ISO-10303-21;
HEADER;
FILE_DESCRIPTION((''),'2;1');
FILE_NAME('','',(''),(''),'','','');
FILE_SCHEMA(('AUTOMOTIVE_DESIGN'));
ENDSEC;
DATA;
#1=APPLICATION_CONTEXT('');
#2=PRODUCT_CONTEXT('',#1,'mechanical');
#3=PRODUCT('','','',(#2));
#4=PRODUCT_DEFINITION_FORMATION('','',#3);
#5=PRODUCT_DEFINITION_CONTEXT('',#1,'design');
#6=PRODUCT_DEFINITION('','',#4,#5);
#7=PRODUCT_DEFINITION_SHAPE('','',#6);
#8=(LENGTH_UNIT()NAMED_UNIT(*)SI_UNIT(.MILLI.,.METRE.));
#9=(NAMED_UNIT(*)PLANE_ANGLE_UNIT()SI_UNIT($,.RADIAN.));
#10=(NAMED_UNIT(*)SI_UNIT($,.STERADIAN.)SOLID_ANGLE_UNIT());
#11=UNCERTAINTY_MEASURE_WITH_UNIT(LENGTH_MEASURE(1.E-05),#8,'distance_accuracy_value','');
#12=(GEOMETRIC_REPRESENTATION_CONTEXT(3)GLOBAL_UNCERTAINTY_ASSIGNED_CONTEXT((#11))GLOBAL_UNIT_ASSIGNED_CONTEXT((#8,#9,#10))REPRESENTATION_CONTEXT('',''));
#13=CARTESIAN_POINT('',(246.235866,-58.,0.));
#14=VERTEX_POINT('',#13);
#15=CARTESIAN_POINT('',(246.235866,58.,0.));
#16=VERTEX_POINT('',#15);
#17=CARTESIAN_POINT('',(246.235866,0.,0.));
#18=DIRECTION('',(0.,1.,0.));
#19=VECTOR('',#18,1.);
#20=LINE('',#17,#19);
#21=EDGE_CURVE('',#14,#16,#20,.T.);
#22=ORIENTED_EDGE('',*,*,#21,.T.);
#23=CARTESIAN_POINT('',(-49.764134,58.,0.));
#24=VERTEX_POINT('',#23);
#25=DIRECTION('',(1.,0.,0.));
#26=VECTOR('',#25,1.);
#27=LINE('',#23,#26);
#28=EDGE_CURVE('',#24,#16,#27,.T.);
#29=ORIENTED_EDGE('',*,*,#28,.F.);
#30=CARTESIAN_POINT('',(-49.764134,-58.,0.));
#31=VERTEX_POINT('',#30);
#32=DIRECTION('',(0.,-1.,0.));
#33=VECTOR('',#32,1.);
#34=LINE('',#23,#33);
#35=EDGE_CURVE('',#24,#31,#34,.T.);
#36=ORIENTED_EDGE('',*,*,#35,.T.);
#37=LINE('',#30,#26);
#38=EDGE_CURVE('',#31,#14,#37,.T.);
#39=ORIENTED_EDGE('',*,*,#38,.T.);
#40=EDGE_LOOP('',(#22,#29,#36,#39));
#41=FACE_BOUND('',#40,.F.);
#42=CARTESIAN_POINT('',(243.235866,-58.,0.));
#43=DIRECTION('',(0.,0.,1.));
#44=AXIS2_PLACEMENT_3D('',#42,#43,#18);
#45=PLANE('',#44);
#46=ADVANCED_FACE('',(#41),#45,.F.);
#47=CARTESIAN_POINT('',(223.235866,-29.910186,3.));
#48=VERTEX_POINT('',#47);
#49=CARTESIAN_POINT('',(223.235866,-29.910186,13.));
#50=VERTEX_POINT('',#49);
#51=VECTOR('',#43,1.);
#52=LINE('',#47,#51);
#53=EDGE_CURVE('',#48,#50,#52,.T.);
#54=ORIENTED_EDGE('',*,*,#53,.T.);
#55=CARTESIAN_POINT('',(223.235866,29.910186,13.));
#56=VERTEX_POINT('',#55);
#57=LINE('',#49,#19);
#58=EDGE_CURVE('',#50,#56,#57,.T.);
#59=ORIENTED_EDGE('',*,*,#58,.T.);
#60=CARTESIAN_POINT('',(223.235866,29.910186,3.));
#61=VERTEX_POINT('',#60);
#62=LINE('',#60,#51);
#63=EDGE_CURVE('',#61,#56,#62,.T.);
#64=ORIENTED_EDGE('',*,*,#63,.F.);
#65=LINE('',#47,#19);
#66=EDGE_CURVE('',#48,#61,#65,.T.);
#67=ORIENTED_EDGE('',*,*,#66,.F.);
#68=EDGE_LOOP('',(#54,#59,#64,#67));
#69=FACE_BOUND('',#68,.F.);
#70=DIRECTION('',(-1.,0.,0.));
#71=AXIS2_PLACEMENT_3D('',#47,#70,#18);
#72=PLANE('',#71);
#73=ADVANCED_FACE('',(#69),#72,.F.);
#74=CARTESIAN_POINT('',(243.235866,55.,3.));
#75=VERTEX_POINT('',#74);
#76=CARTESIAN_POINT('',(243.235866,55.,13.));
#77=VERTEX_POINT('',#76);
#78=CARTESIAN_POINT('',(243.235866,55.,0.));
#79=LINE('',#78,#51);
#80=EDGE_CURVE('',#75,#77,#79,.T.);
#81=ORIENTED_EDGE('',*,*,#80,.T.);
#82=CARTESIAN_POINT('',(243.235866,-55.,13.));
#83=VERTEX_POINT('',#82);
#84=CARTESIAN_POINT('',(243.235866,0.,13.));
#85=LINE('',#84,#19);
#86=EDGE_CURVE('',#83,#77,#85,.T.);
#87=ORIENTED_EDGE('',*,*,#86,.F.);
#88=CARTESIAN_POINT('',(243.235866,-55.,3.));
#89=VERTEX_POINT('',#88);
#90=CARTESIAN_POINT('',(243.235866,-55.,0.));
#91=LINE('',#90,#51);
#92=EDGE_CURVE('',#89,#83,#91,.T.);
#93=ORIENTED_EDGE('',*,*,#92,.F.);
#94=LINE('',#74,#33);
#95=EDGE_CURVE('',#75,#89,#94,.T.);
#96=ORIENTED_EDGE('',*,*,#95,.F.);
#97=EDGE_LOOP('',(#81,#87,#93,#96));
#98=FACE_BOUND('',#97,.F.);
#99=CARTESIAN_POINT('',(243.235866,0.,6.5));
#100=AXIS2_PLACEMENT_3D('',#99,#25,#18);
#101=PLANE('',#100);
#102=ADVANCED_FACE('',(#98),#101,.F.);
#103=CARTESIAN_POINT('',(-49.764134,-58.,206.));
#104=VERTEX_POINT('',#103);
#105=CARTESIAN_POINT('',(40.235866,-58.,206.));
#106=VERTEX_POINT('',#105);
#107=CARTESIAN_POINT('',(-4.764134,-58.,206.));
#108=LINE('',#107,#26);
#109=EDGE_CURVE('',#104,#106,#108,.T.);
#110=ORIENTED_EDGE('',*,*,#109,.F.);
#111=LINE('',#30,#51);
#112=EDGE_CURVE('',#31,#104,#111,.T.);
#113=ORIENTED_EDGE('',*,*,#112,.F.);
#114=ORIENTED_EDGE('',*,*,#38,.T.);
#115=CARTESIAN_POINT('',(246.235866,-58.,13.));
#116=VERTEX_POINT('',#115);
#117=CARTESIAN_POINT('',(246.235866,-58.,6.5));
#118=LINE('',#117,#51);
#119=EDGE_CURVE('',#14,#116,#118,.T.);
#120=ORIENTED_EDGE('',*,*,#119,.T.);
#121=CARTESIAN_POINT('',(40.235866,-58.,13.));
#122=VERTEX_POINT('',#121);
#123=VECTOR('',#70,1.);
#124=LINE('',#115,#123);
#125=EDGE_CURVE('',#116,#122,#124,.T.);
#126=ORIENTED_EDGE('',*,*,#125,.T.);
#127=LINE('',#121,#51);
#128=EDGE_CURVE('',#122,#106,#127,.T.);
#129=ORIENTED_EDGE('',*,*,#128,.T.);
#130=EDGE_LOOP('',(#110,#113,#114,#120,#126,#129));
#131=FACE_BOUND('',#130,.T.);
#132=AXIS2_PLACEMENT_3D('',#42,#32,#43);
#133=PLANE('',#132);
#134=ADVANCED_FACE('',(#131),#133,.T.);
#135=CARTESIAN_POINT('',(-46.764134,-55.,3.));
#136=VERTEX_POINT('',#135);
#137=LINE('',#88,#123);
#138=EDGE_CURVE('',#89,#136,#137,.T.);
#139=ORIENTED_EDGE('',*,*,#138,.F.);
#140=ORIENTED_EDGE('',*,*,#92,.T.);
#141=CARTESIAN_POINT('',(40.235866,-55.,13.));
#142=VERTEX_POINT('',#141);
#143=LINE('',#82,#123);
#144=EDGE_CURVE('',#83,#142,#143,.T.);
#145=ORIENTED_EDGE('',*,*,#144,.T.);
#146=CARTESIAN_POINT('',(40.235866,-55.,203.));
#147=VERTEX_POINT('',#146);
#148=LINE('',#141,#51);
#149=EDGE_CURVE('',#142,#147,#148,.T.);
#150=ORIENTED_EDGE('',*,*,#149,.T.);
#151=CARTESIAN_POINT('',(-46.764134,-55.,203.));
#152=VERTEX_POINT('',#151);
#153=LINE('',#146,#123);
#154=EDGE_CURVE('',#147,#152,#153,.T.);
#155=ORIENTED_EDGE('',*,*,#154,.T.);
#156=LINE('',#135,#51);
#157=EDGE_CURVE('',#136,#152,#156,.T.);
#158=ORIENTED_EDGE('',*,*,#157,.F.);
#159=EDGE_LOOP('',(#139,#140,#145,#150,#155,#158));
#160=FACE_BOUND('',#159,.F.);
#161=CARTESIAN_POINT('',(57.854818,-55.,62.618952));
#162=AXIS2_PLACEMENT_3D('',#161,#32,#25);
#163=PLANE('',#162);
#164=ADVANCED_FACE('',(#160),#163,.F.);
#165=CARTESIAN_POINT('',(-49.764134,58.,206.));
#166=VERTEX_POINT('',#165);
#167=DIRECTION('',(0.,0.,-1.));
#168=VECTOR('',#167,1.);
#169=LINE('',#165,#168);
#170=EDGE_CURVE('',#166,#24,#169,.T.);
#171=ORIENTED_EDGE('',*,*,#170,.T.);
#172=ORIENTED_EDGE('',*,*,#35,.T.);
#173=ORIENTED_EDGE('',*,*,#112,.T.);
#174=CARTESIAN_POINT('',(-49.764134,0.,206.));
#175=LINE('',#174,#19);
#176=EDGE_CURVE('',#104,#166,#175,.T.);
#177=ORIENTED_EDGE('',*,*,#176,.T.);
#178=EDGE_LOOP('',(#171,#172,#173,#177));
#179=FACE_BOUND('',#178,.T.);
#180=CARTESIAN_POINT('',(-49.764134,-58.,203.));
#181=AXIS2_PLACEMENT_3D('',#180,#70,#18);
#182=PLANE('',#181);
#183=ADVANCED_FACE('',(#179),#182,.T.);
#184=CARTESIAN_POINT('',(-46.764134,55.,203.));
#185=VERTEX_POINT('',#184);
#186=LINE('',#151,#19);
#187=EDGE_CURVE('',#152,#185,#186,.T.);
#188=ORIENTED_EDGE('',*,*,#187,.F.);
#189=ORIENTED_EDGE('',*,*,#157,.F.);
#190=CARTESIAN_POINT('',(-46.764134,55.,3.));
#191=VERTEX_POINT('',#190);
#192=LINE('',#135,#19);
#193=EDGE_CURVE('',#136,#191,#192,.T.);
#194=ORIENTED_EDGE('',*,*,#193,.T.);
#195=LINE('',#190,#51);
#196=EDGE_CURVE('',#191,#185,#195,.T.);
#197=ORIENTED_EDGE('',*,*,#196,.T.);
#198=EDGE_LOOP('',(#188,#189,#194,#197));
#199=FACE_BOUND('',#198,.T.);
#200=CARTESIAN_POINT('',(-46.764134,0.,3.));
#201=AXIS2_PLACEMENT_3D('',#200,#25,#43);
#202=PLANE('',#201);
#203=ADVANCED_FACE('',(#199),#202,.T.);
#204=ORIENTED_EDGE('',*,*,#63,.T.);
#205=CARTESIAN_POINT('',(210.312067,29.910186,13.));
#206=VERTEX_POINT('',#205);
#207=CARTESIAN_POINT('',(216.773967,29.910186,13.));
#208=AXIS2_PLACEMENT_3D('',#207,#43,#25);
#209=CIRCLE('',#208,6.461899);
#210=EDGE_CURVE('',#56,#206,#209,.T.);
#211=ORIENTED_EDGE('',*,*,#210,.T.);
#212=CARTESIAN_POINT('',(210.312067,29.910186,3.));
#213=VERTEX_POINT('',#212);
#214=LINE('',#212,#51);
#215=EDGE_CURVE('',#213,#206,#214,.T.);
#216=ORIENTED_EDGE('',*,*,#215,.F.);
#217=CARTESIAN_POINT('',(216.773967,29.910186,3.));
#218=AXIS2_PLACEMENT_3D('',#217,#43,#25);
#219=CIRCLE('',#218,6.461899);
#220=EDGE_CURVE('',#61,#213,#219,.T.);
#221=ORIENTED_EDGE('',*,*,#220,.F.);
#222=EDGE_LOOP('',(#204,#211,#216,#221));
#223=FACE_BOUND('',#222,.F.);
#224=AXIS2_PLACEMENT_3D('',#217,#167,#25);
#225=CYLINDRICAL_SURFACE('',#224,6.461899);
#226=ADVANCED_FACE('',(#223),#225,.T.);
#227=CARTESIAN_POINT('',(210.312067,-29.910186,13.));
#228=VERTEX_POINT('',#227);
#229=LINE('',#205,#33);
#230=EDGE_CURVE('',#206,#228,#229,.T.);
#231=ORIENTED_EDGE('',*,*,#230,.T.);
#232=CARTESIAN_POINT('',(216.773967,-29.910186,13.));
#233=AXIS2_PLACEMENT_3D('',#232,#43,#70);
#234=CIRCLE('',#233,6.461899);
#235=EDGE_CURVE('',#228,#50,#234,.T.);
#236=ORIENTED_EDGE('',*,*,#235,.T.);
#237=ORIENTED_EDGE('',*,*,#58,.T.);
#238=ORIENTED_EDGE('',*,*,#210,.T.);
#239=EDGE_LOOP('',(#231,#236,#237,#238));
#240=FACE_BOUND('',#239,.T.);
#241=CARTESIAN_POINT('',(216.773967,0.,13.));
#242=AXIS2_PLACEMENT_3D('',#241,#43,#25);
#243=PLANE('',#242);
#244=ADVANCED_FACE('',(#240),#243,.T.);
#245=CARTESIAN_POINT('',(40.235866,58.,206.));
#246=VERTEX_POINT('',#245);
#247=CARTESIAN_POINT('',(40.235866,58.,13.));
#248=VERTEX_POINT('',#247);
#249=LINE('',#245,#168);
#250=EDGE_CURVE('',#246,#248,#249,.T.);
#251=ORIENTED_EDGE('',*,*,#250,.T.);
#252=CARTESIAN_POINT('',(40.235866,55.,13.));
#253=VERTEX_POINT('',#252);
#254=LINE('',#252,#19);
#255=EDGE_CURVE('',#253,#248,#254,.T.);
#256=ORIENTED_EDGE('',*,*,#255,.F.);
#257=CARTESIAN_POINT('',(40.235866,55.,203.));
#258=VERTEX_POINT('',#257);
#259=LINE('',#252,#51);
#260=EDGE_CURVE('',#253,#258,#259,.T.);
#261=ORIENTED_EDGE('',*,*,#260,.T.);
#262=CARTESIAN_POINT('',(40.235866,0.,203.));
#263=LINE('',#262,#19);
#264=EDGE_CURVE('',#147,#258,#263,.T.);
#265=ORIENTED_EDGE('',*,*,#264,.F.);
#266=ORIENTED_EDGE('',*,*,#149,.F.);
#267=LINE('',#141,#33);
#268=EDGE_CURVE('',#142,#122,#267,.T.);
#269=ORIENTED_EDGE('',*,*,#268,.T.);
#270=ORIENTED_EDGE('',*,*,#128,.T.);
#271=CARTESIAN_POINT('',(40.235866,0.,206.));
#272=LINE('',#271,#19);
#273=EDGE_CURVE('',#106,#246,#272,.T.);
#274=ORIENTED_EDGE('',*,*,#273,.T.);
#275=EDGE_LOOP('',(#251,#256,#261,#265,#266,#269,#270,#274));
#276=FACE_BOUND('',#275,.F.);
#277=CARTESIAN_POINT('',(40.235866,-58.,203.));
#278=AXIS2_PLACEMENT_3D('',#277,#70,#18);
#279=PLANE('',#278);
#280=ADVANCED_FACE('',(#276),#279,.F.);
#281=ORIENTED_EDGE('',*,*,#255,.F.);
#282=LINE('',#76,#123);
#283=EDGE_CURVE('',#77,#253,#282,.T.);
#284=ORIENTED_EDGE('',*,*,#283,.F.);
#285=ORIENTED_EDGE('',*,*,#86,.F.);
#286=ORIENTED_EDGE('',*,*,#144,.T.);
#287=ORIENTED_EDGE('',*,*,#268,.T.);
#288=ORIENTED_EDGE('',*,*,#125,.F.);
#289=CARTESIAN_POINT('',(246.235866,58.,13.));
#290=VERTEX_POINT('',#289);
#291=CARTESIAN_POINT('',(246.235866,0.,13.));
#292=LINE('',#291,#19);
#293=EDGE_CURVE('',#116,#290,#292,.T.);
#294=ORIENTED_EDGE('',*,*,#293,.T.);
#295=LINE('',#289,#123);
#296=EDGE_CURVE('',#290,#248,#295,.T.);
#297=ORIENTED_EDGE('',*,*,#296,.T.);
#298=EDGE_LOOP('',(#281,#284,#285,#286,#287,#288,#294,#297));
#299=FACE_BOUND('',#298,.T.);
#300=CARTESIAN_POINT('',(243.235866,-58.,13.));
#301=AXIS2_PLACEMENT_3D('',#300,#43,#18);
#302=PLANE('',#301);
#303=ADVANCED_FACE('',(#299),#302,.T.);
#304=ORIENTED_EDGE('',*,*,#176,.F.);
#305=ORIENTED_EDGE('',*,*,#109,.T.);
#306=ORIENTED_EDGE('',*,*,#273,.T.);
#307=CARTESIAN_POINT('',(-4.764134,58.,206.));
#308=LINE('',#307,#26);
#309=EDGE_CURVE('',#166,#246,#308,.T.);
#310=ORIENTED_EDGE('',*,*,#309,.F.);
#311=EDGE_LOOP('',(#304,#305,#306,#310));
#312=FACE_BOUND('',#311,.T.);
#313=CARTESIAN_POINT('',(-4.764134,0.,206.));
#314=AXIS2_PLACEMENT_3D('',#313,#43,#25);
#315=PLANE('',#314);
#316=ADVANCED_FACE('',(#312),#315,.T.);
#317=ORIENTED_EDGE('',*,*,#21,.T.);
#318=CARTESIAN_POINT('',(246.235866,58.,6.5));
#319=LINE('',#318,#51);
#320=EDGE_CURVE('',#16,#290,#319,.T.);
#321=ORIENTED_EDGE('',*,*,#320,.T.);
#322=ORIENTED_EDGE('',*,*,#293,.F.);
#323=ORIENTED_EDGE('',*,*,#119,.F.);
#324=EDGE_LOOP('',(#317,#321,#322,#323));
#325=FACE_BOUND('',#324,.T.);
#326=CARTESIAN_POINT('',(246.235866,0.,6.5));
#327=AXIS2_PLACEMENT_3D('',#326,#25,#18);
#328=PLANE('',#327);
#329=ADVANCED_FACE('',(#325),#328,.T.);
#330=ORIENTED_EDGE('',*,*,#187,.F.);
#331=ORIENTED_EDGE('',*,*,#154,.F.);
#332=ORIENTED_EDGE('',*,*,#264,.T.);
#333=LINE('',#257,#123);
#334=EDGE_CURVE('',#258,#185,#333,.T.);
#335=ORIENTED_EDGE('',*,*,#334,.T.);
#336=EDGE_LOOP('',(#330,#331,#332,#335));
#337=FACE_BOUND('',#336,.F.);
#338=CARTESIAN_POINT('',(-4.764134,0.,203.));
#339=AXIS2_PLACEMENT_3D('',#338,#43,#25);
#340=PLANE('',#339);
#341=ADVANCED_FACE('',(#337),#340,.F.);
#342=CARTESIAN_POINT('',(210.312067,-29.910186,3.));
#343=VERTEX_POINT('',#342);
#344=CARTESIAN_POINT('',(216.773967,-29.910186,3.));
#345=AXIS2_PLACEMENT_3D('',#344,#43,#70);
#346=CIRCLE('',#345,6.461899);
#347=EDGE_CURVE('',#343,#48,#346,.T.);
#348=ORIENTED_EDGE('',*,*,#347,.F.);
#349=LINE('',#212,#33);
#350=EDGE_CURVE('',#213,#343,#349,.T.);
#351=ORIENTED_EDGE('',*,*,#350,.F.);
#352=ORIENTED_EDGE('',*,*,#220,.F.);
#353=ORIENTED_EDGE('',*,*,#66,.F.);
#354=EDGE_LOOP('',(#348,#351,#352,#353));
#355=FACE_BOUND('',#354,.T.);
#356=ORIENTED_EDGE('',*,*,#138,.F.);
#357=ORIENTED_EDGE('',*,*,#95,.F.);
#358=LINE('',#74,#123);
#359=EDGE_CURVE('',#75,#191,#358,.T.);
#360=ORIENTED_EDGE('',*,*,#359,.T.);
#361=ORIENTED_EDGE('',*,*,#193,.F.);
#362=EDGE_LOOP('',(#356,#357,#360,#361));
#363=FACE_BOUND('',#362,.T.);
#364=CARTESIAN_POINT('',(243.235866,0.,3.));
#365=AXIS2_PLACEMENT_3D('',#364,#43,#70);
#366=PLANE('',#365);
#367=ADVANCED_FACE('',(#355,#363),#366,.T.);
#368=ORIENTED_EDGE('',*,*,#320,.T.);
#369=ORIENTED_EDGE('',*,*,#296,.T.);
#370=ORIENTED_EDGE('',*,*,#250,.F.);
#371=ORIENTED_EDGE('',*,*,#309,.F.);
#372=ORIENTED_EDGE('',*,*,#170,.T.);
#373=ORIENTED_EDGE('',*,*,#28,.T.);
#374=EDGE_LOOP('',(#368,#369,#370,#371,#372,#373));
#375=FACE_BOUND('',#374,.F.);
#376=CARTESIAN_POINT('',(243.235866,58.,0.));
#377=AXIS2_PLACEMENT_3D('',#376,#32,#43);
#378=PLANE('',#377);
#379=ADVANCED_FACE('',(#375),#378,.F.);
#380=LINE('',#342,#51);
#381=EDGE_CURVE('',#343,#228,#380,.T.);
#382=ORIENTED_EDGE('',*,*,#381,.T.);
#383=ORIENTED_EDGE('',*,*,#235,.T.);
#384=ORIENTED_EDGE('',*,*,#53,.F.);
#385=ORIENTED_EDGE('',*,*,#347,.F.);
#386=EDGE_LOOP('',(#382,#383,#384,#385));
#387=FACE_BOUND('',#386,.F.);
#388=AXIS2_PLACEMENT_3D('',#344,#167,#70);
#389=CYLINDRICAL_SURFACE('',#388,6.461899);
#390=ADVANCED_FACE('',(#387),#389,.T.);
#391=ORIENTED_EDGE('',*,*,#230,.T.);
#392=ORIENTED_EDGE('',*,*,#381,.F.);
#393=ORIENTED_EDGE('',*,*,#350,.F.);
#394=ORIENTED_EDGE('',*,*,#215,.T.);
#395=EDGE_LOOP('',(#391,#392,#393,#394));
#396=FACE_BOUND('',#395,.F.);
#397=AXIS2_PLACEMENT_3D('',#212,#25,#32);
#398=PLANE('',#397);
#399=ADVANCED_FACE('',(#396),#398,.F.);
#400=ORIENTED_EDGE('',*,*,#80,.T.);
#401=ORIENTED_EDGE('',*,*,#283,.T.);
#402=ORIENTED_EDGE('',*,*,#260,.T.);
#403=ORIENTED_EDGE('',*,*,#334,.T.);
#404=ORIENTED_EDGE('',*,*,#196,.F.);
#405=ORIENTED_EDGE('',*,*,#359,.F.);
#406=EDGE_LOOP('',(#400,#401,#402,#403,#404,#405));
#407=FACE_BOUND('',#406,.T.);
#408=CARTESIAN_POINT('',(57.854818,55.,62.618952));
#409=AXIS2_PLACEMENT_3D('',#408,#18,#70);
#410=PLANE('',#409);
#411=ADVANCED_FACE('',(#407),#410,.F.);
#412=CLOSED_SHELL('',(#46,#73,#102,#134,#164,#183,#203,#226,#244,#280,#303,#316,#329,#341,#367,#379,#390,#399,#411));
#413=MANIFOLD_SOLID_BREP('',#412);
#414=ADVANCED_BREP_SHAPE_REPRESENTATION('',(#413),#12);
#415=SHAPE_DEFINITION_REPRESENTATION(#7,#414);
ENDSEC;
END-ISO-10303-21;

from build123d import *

# Parameters (mm, degrees)
F1_DEPTH      = 55
F1_DEPTH_BACK = 55
F4_DEPTH      = 3
F6_W          = 90
F6_H          = 116
F7_DEPTH      = 3
F9_W          = 116
F9_H          = 13
F10_DEPTH     = 3
F13_DEPTH     = 10


# Not quite as in the source:
# - a pattern or mirror of a feature is missing from the dataset's text; its kind, count and spacing are read off the source's solid


with BuildPart() as f1:
    # F0 (on Front) → F1 (new body, two sides)
    with BuildSketch(Plane.XZ) as f1_sk:
        Polygon((-49.7641339898, 203), (-49.7641339898, 0), (243.2358660102, 0), (243.2358660102, 3), (-46.7641339898, 3), (-46.7641339898, 203), align=None)
    extrude(amount=F1_DEPTH)
    extrude(f1_sk.sketch, amount=-F1_DEPTH_BACK)

    # F3 (on offset) → F4 (join)
    with BuildSketch(Plane.XZ.offset(55)):
        Polygon((40.2358660102, 203), (-49.7641339898, 203), (-49.7641339898, 0), (243.2358660102, 0), (243.2358660102, 13), (40.2358660102, 13), align=None)
    f4 = extrude(amount=F4_DEPTH)

    # F4_copies: F4 across plane
    add(f4.mirror(Plane.ZX))

    # F6 (on face) → F7 (join)
    with BuildSketch(Plane.XY.offset(203)):
        with Locations((-4.7641339898, 0)):
            Rectangle(F6_W, F6_H)
    extrude(amount=F7_DEPTH)

    # F9 (on face) → F10 (join)
    with BuildSketch(Plane.YZ.offset(243.2358660102)):
        with Locations((0, 6.5)):
            Rectangle(F9_W, F9_H)
    extrude(amount=F10_DEPTH)

    # F12 (on offset) → F13 (join)
    with BuildSketch(Plane.XY.offset(3)):
        with BuildLine():
            Line((210.3120674863, 29.9101863056), (210.3120674863, 0))
            Line((210.3120674863, 0), (210.3120674863, -29.9101863056))
            ThreePointArc((210.3120674863, -29.9101863056), (216.7739667483, -36.3720855676), (223.2358660102, -29.9101863056))
            Line((223.2358660102, -29.9101863056), (223.2358660102, 0))
            Line((223.2358660102, 0), (223.2358660102, 29.9101863056))
            ThreePointArc((223.2358660102, 29.9101863056), (216.7739667483, 36.3720855676), (210.3120674863, 29.9101863056))
        make_face()
    extrude(amount=F13_DEPTH)


solid = f1.part
